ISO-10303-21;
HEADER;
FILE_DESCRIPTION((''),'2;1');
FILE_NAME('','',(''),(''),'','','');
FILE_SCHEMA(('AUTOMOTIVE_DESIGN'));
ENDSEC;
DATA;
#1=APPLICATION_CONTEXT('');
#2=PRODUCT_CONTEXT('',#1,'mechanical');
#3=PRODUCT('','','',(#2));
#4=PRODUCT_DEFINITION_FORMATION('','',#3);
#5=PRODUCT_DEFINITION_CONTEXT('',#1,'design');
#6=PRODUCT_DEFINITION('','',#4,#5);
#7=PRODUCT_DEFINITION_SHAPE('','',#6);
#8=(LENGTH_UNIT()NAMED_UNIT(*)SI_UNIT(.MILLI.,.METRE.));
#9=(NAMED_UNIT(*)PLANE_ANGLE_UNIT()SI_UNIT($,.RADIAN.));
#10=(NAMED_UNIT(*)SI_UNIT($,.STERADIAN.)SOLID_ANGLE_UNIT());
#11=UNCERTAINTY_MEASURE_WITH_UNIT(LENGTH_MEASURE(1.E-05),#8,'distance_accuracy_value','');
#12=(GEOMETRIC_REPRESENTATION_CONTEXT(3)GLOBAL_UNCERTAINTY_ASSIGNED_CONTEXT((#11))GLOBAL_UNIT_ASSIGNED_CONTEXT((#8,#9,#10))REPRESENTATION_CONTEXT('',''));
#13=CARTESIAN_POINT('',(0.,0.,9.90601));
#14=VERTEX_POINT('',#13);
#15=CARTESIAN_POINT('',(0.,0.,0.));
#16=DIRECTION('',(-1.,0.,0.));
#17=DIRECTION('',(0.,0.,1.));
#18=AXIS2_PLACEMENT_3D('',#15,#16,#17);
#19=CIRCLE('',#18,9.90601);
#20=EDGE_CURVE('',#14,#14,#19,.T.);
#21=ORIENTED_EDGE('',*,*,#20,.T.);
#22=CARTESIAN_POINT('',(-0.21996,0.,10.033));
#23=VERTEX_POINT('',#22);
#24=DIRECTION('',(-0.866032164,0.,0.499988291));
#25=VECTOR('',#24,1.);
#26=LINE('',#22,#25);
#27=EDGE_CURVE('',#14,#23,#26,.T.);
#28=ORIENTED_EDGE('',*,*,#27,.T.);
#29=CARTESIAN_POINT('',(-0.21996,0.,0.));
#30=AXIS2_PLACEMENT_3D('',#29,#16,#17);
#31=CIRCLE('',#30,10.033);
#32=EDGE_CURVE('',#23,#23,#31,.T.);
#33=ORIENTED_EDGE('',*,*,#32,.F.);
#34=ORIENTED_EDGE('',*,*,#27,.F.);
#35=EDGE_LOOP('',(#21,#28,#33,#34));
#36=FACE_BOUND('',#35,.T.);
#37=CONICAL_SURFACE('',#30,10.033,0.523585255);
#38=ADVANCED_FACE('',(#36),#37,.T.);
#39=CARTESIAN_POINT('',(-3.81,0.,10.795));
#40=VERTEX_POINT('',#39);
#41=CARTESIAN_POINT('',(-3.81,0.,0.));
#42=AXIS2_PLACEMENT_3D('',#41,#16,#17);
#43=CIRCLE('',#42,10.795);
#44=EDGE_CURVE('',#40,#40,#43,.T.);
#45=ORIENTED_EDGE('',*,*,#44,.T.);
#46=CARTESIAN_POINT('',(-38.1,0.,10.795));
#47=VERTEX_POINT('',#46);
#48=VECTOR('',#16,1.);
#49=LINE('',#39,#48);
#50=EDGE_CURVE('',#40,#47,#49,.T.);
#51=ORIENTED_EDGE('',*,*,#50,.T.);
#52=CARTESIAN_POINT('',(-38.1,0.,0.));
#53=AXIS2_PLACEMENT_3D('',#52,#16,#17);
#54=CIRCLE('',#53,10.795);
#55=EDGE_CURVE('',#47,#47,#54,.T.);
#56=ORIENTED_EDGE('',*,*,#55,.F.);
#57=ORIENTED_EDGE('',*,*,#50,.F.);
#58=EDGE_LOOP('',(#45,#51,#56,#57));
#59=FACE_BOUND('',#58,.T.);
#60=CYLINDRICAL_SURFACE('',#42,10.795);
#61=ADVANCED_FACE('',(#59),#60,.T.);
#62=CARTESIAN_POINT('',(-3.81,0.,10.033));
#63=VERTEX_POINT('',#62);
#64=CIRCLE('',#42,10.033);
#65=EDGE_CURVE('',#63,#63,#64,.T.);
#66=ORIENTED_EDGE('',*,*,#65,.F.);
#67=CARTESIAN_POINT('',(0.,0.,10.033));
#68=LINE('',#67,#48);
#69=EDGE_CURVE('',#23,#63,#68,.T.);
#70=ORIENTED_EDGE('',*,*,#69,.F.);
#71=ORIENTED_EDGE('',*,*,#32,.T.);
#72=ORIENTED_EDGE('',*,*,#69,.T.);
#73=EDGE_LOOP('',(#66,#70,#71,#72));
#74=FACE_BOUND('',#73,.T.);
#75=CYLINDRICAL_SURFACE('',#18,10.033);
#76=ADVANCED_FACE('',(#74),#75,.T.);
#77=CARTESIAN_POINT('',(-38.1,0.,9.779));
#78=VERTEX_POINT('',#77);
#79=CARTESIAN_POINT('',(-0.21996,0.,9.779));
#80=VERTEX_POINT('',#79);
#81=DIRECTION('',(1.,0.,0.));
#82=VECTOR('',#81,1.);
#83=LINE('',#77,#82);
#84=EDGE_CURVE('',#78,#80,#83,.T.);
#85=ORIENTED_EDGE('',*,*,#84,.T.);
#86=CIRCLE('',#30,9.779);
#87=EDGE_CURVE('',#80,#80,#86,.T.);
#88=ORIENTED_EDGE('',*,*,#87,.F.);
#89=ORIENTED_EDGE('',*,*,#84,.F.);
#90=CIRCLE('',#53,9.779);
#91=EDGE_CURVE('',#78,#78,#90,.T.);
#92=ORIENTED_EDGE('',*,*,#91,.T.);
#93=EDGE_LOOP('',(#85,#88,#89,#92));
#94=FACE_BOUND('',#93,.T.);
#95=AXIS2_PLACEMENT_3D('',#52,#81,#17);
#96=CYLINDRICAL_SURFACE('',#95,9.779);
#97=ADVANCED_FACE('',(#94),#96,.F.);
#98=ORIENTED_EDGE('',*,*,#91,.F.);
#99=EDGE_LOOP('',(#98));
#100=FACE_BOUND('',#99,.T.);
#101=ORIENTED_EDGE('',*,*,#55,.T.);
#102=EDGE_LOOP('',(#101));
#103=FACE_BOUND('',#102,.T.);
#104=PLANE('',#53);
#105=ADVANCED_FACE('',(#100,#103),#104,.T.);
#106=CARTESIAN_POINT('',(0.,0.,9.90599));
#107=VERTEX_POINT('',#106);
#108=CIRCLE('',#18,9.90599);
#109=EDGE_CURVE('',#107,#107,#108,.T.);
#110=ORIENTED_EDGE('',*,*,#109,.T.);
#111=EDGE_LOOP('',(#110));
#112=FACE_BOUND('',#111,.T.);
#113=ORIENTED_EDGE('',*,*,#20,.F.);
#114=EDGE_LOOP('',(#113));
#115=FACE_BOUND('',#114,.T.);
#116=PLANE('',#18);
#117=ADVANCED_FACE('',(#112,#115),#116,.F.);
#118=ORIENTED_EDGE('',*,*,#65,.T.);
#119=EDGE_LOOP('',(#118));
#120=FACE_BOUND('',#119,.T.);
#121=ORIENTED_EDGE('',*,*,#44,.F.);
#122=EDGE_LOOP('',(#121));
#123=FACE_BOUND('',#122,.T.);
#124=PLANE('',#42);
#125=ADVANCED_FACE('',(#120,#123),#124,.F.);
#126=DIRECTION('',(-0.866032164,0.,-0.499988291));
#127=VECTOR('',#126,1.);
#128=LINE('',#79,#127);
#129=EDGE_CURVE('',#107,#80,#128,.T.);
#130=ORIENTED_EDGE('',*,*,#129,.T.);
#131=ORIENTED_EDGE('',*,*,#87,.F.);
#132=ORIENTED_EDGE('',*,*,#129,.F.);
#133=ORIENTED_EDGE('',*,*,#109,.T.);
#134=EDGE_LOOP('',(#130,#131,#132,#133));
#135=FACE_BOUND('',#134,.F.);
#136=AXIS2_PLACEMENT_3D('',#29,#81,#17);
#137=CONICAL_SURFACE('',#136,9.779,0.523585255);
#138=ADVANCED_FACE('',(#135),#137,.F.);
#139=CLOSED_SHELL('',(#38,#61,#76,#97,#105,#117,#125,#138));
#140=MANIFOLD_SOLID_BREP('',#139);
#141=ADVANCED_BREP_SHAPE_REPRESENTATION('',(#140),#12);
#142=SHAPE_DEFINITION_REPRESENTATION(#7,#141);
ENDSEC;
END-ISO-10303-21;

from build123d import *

# Parameters (mm, degrees)
F2_SIZE2 = 0.21996
F2_SIZE  = 0.12699


# Not quite as in the source:
# - a fillet or chamfer is up to 0.001 mm smaller than in the source, because OpenCascade refuses the exact size


with BuildPart() as f1:
    # F0 (on Front) → F1 (revolve)
    with BuildSketch(Plane.XZ):
        Polygon((-38.1, 9.779), (0, 9.779), (0, 10.033), (-3.81, 10.033), (-3.81, 10.795), (-38.1, 10.795), align=None)
    revolve(axis=Axis((-19.05, 0, 0), (-1, 0, 0)))

    # F2 (size 0.127 and 0.2199704526 in the source; OpenCascade refuses exactly that, so slightly less here)
    f2_edges = [f1.edges().sort_by_distance(p)[0] for p in [
        (0, 0, -10.033),
        (0, 0, -9.779),
    ]]
    f2_side = f1.faces().sort_by_distance((0, 0, -9.807378))[0]
    chamfer(f2_edges, length=F2_SIZE, length2=F2_SIZE2, reference=f2_side)


solid = f1.part
